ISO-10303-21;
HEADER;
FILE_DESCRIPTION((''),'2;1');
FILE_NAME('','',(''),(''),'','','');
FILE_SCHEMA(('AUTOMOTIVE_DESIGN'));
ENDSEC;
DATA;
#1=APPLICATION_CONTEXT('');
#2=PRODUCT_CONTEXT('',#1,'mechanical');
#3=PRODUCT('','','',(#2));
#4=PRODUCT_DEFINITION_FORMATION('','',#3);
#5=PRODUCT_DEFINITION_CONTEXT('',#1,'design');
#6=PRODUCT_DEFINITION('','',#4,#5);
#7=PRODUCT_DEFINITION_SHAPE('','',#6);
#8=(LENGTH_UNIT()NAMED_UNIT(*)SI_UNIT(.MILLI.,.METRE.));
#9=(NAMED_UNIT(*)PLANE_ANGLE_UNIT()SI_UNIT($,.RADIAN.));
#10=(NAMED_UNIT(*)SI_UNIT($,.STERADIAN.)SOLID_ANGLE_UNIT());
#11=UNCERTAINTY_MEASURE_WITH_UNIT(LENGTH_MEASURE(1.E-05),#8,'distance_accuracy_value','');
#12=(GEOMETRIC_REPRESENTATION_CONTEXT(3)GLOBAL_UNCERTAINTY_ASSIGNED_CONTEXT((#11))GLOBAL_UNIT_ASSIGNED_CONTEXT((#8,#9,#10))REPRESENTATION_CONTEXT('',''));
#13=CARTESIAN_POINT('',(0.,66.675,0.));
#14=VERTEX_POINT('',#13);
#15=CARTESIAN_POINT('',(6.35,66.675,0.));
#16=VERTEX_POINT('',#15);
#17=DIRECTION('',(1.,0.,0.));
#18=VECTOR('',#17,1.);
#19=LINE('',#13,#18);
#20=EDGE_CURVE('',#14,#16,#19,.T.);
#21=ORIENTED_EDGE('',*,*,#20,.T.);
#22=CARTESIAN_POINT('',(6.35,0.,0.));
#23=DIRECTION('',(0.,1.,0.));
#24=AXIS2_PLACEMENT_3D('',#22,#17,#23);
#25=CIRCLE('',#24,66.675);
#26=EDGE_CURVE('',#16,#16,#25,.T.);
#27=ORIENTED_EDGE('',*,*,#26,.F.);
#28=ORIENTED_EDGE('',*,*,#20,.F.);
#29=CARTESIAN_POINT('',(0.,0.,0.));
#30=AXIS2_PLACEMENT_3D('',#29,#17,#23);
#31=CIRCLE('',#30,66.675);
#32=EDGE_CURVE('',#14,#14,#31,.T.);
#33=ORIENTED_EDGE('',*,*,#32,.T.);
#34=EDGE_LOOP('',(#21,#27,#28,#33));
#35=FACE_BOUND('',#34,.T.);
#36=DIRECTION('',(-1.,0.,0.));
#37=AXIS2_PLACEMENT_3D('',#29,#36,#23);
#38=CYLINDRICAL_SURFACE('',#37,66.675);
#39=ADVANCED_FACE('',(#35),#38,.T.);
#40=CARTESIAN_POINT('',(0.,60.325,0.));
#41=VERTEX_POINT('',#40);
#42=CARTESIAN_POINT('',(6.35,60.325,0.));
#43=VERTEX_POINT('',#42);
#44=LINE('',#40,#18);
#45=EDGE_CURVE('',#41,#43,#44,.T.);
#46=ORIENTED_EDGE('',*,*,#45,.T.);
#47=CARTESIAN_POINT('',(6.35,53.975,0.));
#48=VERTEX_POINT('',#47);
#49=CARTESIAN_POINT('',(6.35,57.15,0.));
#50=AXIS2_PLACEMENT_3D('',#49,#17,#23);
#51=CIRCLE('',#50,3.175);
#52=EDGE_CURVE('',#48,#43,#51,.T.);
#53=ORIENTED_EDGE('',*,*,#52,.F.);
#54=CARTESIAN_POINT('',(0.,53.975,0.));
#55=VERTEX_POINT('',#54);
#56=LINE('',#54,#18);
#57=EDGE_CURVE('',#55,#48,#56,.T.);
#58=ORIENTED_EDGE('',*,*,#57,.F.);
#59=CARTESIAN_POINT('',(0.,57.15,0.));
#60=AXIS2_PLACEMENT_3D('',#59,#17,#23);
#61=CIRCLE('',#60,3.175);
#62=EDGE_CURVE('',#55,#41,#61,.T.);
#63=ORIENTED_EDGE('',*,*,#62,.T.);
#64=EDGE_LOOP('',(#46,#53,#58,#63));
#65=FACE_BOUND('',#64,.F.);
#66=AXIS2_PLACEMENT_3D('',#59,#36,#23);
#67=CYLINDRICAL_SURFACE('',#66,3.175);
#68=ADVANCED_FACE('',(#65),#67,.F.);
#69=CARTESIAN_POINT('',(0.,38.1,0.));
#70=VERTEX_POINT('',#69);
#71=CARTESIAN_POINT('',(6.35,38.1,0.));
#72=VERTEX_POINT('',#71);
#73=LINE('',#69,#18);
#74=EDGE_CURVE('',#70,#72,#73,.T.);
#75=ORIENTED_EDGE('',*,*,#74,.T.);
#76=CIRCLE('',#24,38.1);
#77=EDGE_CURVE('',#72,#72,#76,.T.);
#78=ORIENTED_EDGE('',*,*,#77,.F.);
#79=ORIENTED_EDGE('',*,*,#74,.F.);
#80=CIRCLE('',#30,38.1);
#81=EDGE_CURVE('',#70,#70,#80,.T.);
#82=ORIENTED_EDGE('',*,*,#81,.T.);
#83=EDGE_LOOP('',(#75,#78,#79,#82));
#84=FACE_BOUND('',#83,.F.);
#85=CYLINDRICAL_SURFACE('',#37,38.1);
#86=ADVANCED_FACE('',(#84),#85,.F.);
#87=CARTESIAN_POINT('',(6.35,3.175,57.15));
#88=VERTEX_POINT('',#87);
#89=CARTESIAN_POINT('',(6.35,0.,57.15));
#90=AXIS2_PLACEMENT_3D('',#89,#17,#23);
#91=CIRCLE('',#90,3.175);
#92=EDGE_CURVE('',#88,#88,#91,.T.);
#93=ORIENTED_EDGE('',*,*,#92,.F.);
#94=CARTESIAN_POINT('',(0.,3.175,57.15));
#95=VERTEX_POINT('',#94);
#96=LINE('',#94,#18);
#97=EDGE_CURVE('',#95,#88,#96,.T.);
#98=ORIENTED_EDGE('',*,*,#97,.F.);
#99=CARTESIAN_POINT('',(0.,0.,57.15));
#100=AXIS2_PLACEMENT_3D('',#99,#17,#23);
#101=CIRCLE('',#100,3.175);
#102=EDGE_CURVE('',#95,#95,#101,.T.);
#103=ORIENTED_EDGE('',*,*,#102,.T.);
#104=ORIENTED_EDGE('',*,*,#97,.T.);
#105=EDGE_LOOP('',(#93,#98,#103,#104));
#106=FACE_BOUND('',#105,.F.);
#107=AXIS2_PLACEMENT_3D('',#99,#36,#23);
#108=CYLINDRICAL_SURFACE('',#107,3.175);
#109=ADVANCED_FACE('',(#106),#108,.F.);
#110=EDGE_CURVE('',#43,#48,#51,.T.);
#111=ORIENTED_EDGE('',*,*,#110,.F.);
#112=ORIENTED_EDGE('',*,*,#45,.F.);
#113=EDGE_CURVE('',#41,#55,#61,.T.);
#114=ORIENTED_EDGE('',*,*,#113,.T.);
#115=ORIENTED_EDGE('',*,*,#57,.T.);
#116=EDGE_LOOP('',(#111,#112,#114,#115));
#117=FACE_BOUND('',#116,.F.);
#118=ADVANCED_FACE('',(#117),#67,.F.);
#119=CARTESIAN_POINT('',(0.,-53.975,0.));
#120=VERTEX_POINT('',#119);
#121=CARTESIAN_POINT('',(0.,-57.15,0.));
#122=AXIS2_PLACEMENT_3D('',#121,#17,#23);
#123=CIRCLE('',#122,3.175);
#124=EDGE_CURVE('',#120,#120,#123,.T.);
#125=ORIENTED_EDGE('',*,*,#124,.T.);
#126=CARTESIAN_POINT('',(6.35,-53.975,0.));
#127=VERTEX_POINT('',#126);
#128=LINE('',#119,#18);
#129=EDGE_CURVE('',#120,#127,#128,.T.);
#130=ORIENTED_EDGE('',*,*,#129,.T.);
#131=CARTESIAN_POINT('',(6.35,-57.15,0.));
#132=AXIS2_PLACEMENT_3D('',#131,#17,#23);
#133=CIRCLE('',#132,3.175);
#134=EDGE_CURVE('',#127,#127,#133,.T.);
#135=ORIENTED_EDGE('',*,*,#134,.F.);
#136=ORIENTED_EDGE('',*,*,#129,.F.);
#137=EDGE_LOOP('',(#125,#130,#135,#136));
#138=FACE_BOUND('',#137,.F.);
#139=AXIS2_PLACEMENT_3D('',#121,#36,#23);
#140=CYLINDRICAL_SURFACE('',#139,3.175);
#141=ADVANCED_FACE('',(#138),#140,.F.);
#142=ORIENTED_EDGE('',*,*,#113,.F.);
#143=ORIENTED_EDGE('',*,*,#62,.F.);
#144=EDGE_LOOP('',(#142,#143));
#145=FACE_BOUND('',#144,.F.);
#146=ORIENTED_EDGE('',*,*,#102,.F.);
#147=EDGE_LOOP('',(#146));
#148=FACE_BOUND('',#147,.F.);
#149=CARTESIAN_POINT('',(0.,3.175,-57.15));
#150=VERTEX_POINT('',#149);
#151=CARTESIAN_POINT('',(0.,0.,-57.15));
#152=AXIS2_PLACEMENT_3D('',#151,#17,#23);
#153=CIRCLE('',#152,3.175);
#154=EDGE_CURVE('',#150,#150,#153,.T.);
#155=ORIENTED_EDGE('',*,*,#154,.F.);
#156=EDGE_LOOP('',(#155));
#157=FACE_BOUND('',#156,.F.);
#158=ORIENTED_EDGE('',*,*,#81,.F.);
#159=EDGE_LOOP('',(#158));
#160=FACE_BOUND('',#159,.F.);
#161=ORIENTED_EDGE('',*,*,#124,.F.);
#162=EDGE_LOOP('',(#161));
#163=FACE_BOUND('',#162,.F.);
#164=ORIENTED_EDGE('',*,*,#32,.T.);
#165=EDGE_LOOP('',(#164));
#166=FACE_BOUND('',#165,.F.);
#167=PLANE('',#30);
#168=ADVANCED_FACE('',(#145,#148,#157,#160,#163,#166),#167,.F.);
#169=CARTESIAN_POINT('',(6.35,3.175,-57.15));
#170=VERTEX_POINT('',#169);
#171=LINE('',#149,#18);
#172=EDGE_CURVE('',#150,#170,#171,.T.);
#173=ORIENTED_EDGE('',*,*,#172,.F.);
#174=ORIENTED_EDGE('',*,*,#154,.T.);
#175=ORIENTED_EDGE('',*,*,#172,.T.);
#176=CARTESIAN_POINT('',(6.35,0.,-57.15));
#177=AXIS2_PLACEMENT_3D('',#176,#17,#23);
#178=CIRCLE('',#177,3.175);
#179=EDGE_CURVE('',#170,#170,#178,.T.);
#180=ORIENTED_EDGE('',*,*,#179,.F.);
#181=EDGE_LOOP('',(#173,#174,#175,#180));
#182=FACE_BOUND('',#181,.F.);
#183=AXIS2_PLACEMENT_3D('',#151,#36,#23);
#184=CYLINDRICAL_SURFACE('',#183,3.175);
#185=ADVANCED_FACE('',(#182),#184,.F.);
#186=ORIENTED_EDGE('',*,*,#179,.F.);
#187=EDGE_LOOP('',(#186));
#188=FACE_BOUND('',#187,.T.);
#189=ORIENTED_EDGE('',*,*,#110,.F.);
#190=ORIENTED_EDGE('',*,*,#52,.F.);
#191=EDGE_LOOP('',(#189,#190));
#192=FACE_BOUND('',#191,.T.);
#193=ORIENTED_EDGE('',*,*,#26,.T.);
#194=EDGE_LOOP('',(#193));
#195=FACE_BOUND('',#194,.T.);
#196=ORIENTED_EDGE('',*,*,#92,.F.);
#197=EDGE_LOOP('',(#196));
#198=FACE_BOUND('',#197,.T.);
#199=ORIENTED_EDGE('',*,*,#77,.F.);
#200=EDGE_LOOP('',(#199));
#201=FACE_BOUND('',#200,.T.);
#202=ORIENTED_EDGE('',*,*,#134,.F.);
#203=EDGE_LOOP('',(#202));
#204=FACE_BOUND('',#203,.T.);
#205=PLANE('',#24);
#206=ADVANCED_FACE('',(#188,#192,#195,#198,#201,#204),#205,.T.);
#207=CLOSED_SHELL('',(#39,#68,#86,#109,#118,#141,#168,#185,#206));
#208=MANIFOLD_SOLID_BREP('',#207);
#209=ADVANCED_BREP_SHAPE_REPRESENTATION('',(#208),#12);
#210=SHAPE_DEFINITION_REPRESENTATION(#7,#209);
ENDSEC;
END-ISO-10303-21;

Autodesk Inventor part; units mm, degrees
ref_plane "YZ Plane" through (0, 0, 0) normal (1, 0, 0) x (0, 1, 0)
ref_plane "XZ Plane" through (0, 0, 0) normal (0, 1, 0) x (-1, 0, 0)
ref_plane "XY Plane" through (0, 0, 0) normal (0, 0, 1) x (1, 0, 0)
sketch "Sketch3" plane through (0, 0, 0) normal (1, 0, 0) x (0, 1, 0)
  circle A0 centre (0, 0) radius 66.675
  circle A1 centre (0, -57.15) radius 3.175
  circle A2 centre (57.15, 0) radius 3.175
  circle A3 centre (0, 57.15) radius 3.175
  circle A4 centre (-57.15, 0) radius 3.175
  line L0 (0, 0) -> (79.9058, 0)
  circle A5 centre (0, 0) radius 38.1
  dimension "d13" = 133.35
  dimension "d14" = 6.35
  dimension "d17" = 360
  dimension "d19" = 57.15
  dimension "d20" = 76.2
extrude "Extrusion3" add sketch "Sketch3" along normal blind 6.35
properties part number "BearingAdapter"
